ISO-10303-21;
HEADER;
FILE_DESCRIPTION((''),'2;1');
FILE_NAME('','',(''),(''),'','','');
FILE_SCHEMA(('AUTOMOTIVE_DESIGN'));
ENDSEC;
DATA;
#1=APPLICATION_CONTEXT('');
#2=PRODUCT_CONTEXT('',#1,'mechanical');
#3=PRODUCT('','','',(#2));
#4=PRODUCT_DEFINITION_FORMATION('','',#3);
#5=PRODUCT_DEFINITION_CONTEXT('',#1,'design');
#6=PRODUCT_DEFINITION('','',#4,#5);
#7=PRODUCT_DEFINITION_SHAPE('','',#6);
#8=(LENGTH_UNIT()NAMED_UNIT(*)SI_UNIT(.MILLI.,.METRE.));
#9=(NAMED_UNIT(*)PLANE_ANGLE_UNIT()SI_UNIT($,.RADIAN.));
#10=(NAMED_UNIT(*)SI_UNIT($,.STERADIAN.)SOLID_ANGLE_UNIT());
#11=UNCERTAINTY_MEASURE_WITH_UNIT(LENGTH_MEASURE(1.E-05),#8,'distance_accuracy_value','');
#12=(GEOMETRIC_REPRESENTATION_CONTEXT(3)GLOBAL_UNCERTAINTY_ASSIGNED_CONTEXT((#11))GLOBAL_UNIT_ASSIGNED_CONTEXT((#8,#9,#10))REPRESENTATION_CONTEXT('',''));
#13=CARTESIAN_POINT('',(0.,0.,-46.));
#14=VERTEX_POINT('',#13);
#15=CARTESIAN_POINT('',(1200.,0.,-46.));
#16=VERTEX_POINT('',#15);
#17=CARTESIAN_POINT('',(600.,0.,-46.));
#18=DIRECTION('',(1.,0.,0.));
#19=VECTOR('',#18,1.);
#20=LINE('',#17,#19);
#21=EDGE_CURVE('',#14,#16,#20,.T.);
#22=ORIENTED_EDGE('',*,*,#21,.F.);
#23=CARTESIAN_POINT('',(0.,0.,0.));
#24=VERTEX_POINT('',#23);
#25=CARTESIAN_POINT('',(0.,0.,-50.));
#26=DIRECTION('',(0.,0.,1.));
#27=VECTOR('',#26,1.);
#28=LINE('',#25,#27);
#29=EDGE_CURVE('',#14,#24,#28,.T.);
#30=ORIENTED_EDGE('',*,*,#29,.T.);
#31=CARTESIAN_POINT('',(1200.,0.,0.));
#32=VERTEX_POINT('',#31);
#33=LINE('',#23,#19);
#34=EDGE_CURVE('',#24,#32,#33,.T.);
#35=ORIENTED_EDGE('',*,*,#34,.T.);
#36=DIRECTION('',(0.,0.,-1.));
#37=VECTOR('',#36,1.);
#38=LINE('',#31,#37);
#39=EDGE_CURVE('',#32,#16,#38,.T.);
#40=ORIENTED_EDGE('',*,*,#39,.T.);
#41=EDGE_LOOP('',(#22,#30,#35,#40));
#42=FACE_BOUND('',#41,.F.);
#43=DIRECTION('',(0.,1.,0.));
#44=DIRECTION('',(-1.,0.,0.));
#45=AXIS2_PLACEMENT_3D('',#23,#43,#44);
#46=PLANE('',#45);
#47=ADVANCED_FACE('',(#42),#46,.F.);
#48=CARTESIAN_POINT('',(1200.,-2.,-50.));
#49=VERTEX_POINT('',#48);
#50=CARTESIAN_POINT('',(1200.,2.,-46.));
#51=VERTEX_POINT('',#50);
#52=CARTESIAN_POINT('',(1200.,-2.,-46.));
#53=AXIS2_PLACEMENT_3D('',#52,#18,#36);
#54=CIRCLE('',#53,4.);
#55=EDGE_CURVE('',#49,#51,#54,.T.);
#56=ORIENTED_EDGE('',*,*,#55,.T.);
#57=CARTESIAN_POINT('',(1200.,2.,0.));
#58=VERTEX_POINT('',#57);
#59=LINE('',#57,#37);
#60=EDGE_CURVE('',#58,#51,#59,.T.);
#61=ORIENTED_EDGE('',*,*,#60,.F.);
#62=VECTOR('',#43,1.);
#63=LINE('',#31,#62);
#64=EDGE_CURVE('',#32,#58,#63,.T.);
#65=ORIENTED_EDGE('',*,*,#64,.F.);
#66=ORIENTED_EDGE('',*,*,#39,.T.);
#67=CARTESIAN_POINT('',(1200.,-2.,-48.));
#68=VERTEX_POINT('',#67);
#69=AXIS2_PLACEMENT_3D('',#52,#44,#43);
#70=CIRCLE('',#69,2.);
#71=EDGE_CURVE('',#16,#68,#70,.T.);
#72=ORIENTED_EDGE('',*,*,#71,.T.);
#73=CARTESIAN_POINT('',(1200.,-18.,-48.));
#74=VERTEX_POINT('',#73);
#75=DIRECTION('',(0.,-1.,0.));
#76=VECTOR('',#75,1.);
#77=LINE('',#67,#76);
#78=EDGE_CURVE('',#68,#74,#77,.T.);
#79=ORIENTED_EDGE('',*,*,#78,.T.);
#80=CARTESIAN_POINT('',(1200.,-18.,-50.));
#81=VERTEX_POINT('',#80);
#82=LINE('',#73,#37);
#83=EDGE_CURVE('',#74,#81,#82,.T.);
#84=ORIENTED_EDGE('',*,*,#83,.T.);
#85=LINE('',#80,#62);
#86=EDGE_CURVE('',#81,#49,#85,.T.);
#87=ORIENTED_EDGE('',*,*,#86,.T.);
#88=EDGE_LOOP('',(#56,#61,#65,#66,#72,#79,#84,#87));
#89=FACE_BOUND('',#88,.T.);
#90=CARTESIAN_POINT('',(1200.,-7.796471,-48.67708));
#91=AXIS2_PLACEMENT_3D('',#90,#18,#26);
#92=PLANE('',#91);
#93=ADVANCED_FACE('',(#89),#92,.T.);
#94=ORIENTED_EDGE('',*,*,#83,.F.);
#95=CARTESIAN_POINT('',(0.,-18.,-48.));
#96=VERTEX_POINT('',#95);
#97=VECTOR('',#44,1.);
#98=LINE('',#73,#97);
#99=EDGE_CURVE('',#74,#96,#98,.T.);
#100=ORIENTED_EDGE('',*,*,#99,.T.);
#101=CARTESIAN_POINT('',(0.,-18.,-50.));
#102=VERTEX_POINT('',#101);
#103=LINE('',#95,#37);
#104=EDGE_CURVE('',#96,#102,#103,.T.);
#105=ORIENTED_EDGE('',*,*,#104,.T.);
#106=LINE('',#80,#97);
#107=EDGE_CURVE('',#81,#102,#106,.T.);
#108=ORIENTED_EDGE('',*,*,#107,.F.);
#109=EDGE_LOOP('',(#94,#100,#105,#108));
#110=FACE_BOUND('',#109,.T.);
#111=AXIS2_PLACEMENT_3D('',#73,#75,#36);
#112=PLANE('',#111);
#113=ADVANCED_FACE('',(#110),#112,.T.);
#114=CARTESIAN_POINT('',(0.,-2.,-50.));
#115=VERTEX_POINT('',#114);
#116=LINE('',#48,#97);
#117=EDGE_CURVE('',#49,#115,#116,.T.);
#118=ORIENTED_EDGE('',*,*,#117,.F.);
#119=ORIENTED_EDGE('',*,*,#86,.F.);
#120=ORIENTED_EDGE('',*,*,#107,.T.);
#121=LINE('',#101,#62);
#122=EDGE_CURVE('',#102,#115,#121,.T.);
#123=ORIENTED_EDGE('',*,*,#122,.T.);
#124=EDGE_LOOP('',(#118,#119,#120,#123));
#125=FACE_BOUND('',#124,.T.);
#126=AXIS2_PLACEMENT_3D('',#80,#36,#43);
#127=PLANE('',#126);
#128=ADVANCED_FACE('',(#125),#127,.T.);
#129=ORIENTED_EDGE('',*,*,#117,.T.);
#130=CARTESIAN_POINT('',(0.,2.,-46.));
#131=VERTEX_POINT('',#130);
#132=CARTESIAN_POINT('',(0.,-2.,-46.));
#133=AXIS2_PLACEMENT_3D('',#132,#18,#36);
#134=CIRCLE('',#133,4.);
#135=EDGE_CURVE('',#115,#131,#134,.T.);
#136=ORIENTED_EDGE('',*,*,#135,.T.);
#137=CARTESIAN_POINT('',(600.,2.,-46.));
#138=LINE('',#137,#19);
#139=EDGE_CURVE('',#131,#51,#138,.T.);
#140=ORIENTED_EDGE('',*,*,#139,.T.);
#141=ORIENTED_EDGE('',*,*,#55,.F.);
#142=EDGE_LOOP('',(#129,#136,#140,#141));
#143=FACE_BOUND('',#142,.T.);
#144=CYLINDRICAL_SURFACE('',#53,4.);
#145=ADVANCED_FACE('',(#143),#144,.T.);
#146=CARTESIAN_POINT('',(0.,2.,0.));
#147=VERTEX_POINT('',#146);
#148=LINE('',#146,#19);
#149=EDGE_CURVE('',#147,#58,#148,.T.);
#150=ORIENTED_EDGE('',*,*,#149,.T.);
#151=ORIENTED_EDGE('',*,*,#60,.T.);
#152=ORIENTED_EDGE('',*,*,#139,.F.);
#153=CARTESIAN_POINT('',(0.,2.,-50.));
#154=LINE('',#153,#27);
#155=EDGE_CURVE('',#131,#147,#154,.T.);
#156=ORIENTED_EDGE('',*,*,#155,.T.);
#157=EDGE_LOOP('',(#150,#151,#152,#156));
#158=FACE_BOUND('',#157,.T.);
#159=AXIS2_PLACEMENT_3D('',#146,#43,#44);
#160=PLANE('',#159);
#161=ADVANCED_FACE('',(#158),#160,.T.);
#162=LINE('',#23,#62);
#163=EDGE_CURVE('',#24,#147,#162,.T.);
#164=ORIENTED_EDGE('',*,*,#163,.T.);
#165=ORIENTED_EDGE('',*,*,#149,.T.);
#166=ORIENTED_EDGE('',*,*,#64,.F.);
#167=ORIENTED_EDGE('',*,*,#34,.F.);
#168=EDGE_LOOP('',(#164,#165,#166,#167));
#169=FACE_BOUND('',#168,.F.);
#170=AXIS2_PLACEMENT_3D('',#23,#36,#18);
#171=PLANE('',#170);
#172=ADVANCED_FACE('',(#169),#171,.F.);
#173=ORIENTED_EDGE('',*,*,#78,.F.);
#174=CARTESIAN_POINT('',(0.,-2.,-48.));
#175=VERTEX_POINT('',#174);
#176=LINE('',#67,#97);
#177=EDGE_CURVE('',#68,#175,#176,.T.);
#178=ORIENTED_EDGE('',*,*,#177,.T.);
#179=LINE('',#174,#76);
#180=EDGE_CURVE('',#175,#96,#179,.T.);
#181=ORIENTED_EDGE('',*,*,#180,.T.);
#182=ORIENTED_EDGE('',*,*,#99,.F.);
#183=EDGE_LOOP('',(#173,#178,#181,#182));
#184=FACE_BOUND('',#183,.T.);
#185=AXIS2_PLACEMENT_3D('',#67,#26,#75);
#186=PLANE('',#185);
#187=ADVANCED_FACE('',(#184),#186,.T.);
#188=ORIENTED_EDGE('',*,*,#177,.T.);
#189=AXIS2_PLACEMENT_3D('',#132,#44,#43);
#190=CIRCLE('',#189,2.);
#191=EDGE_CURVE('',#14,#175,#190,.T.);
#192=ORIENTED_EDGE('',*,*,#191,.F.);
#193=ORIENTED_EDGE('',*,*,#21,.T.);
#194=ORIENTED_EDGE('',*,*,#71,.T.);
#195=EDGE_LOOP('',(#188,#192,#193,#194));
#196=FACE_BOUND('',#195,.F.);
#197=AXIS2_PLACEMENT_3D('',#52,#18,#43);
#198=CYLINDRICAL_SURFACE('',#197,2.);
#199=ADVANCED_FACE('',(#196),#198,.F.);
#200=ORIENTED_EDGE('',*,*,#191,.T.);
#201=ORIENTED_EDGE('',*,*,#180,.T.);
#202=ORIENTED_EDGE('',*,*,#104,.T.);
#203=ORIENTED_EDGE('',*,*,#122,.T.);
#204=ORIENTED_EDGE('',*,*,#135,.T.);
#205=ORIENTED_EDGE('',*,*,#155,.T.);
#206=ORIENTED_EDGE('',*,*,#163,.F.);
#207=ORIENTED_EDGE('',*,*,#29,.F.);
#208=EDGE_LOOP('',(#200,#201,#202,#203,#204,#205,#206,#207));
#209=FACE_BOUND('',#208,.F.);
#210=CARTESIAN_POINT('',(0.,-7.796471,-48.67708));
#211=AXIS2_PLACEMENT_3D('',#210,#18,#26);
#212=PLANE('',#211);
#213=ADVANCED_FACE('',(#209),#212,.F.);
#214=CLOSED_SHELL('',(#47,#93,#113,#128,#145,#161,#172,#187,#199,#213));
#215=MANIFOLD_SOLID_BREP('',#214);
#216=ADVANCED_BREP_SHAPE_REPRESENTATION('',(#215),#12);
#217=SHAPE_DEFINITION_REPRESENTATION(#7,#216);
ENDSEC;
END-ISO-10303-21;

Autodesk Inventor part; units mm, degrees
ref_plane "YZ Plane" through (0, 0, 0) normal (1, 0, 0) x (0, 1, 0)
ref_plane "XZ Plane" through (0, 0, 0) normal (0, 1, 0) x (-1, 0, 0)
ref_plane "XY Plane" through (0, 0, 0) normal (0, 0, 1) x (1, 0, 0)
sketch "Sketch3" plane through (0, 0, 0) normal (0, 1, 0) x (-1, 0, 0)
  line L0 (0, 0) -> (-1200, 0)
  line L1 (-1200, 0) -> (-1200, -50)
  line L2 (-1200, -50) -> (0, -50)
  line L3 (0, -50) -> (0, 0)
  dimension "d25" = 50
  dimension "d28" = 1200
extrude "Plate3" add sketch "Sketch3" along normal blind 2
sketch "Sketch4" plane through (1200, 2, -48) normal (0, 0, -1) x (-1, 0, 0)
  line L0 (1200, 0) -> (0, 0)
  line L1 (0, 0) -> (0, -20)
  line L2 (0, -20) -> (1200, -20)
  line L3 (1200, -20) -> (1200, 0)
edge flange "Flange2" height 20 angle 90 thickness 2 bend radius 2 thickness toward (0, 0, -1) relief tear relief width 2 relief depth 1 edges at (600, 0, -50) wall of the first edge with corners at (0, 2, -48) (1200, 2, -48) (1200, -18, -48) (0, -18, -48)
bend "Bend3"
corner "Corner3"
equation "\"d30\" = Thickness"
equation "\"d31\" = BendReliefWidth"
equation "\"d32\" = BendReliefDepth"
equation "\"d33\" = MinimumRemnant"
equation "\"d34\" = TransitionRadius"
equation "\"d37\" = BendRadius"
equation "\"d38\" = CornerReliefSize"
equation "\"d39\" = GapSize"
equation "\"d40\" = JacobiRadiusSize"
equation "\"BendRadius\" = Thickness"
equation "\"BendReliefWidth\" = Thickness"
equation "\"BendReliefDepth\" = 0.5 * Thickness"
equation "\"CornerReliefSize\" = 4 * Thickness"
equation "\"MinimumRemnant\" = 2 * Thickness"
equation "\"TransitionRadius\" = BendRadius"
equation "\"JacobiRadiusSize\" = BendRadius"
equation "\"GapSize\" = Thickness"
equation "\"Thickness\" = 2"
properties part number "GBK-RK-0042 rib 2"
